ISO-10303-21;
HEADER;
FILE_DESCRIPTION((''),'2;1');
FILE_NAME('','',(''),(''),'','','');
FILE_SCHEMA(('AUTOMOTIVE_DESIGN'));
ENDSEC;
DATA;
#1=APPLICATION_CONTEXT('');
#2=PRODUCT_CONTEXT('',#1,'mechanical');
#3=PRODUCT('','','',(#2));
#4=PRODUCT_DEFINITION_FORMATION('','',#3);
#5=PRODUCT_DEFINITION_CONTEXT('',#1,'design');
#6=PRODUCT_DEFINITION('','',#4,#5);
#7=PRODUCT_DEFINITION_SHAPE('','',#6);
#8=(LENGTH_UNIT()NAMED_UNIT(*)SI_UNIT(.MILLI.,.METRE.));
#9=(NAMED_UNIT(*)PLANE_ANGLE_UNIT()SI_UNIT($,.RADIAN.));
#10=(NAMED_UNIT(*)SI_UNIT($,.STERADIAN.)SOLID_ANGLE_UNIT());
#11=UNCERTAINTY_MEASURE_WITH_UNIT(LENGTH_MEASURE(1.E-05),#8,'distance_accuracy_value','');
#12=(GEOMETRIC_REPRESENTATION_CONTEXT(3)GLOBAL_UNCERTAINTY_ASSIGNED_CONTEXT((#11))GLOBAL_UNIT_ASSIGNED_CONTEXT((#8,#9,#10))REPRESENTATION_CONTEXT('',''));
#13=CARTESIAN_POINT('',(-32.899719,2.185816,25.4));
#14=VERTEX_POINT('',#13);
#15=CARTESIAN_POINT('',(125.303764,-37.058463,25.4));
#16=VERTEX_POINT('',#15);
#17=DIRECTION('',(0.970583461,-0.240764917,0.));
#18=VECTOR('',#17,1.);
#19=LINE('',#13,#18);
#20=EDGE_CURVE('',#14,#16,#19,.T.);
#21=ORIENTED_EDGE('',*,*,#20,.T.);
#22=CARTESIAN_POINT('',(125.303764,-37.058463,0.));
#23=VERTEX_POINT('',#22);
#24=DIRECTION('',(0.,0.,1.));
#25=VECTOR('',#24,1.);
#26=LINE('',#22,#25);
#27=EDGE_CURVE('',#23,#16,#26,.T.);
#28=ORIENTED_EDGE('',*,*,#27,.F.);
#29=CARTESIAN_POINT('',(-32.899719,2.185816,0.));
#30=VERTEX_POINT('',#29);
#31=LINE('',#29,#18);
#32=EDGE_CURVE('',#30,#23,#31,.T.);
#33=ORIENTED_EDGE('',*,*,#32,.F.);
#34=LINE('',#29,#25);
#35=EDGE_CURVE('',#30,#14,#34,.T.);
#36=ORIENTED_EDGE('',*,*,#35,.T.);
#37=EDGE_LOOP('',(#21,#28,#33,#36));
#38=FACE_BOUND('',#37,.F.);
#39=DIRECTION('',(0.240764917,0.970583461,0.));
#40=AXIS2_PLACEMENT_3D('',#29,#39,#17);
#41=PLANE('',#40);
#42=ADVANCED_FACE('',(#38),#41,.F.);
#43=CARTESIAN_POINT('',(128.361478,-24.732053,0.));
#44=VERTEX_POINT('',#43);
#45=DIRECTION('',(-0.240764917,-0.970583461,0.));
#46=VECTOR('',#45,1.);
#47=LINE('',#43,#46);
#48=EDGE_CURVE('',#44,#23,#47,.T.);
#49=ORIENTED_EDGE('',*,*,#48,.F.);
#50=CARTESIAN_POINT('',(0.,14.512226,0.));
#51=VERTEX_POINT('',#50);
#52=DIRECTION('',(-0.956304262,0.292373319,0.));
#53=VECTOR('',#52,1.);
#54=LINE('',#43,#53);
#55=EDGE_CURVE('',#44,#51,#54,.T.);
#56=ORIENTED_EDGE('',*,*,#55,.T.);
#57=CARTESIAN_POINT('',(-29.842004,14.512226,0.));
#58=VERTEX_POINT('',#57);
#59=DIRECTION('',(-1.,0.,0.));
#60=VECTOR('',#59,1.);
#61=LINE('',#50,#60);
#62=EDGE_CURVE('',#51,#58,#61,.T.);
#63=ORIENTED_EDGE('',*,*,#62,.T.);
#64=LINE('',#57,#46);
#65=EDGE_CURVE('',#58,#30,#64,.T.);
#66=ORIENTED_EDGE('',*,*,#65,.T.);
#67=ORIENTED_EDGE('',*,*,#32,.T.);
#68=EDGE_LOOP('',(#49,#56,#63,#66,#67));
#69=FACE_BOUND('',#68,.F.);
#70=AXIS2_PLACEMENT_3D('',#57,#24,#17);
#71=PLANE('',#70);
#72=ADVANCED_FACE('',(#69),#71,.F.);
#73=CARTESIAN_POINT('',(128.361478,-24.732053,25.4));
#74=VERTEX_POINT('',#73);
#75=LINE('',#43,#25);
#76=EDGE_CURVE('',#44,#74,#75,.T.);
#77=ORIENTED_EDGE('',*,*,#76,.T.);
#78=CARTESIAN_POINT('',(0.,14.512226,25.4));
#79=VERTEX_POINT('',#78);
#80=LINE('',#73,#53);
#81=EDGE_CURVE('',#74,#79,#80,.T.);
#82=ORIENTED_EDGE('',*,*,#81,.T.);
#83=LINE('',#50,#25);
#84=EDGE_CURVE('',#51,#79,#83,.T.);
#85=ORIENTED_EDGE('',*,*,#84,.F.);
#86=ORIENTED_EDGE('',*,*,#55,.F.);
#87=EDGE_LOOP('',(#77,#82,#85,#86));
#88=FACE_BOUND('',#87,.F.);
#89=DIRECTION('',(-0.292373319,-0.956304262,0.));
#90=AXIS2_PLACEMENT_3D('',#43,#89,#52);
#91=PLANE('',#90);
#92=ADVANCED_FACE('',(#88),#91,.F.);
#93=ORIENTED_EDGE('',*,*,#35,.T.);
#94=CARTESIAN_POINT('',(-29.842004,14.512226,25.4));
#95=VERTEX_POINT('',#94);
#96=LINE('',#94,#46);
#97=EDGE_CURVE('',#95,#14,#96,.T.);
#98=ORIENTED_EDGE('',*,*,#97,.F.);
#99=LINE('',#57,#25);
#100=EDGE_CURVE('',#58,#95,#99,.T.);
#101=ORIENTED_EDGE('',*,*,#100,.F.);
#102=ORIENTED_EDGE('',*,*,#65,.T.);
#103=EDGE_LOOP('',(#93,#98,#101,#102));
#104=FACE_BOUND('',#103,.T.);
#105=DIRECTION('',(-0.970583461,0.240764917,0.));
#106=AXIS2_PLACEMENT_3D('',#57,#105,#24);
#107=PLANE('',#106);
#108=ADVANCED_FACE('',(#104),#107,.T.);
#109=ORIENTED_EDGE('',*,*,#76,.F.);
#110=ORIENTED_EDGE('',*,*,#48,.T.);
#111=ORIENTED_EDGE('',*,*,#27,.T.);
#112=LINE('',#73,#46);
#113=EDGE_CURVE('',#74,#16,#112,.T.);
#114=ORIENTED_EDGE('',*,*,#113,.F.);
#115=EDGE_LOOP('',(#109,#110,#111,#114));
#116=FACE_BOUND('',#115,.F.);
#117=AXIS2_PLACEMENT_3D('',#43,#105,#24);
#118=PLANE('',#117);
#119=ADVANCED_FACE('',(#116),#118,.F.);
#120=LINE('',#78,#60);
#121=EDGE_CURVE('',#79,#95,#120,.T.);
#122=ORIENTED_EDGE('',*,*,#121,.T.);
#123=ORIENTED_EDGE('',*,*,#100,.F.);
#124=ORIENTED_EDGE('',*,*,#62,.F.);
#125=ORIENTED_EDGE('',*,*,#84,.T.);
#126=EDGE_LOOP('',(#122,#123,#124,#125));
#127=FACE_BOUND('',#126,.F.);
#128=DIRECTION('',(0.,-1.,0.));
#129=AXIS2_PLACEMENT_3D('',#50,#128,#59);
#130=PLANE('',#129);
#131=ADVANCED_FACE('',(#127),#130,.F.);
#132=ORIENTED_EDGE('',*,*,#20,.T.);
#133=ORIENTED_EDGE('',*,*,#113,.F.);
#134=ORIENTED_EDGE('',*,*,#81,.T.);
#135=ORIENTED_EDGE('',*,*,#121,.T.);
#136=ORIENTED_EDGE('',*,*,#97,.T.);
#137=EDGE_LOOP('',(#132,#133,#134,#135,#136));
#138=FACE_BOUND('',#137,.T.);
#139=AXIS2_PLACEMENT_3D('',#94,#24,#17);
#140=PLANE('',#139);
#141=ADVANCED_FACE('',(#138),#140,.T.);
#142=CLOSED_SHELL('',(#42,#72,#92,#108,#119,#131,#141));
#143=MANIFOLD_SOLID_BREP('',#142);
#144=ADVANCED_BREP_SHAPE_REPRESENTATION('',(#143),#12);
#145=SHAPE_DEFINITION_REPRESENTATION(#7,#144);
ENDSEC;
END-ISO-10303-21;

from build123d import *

# Parameters (mm, degrees)
F2_DEPTH = 25.4
F3_DEPTH = 12.7


# Not quite as in the source:
# - a length typed as a fraction of an inch, garbled in the dataset ("3 / 203.2 mm" for 3/8 in), is restored


with BuildPart() as f2:
    # F1 (on face) → F2 (new body)
    with BuildSketch(Plane.XY):
        Polygon((-29.84200418, 14.5122259855), (128.3614784479, -24.7320532799), (0, 14.5122259855), align=None)
    extrude(amount=F2_DEPTH)

    # F3 (add): a face of the model
    f3_faces = [f2.faces().sort_by_distance(p)[0] for p in [
        (49.259737134, -5.1099136472, 12.7),
    ]]
    extrude(f3_faces, amount=F3_DEPTH)


solid = f2.part
